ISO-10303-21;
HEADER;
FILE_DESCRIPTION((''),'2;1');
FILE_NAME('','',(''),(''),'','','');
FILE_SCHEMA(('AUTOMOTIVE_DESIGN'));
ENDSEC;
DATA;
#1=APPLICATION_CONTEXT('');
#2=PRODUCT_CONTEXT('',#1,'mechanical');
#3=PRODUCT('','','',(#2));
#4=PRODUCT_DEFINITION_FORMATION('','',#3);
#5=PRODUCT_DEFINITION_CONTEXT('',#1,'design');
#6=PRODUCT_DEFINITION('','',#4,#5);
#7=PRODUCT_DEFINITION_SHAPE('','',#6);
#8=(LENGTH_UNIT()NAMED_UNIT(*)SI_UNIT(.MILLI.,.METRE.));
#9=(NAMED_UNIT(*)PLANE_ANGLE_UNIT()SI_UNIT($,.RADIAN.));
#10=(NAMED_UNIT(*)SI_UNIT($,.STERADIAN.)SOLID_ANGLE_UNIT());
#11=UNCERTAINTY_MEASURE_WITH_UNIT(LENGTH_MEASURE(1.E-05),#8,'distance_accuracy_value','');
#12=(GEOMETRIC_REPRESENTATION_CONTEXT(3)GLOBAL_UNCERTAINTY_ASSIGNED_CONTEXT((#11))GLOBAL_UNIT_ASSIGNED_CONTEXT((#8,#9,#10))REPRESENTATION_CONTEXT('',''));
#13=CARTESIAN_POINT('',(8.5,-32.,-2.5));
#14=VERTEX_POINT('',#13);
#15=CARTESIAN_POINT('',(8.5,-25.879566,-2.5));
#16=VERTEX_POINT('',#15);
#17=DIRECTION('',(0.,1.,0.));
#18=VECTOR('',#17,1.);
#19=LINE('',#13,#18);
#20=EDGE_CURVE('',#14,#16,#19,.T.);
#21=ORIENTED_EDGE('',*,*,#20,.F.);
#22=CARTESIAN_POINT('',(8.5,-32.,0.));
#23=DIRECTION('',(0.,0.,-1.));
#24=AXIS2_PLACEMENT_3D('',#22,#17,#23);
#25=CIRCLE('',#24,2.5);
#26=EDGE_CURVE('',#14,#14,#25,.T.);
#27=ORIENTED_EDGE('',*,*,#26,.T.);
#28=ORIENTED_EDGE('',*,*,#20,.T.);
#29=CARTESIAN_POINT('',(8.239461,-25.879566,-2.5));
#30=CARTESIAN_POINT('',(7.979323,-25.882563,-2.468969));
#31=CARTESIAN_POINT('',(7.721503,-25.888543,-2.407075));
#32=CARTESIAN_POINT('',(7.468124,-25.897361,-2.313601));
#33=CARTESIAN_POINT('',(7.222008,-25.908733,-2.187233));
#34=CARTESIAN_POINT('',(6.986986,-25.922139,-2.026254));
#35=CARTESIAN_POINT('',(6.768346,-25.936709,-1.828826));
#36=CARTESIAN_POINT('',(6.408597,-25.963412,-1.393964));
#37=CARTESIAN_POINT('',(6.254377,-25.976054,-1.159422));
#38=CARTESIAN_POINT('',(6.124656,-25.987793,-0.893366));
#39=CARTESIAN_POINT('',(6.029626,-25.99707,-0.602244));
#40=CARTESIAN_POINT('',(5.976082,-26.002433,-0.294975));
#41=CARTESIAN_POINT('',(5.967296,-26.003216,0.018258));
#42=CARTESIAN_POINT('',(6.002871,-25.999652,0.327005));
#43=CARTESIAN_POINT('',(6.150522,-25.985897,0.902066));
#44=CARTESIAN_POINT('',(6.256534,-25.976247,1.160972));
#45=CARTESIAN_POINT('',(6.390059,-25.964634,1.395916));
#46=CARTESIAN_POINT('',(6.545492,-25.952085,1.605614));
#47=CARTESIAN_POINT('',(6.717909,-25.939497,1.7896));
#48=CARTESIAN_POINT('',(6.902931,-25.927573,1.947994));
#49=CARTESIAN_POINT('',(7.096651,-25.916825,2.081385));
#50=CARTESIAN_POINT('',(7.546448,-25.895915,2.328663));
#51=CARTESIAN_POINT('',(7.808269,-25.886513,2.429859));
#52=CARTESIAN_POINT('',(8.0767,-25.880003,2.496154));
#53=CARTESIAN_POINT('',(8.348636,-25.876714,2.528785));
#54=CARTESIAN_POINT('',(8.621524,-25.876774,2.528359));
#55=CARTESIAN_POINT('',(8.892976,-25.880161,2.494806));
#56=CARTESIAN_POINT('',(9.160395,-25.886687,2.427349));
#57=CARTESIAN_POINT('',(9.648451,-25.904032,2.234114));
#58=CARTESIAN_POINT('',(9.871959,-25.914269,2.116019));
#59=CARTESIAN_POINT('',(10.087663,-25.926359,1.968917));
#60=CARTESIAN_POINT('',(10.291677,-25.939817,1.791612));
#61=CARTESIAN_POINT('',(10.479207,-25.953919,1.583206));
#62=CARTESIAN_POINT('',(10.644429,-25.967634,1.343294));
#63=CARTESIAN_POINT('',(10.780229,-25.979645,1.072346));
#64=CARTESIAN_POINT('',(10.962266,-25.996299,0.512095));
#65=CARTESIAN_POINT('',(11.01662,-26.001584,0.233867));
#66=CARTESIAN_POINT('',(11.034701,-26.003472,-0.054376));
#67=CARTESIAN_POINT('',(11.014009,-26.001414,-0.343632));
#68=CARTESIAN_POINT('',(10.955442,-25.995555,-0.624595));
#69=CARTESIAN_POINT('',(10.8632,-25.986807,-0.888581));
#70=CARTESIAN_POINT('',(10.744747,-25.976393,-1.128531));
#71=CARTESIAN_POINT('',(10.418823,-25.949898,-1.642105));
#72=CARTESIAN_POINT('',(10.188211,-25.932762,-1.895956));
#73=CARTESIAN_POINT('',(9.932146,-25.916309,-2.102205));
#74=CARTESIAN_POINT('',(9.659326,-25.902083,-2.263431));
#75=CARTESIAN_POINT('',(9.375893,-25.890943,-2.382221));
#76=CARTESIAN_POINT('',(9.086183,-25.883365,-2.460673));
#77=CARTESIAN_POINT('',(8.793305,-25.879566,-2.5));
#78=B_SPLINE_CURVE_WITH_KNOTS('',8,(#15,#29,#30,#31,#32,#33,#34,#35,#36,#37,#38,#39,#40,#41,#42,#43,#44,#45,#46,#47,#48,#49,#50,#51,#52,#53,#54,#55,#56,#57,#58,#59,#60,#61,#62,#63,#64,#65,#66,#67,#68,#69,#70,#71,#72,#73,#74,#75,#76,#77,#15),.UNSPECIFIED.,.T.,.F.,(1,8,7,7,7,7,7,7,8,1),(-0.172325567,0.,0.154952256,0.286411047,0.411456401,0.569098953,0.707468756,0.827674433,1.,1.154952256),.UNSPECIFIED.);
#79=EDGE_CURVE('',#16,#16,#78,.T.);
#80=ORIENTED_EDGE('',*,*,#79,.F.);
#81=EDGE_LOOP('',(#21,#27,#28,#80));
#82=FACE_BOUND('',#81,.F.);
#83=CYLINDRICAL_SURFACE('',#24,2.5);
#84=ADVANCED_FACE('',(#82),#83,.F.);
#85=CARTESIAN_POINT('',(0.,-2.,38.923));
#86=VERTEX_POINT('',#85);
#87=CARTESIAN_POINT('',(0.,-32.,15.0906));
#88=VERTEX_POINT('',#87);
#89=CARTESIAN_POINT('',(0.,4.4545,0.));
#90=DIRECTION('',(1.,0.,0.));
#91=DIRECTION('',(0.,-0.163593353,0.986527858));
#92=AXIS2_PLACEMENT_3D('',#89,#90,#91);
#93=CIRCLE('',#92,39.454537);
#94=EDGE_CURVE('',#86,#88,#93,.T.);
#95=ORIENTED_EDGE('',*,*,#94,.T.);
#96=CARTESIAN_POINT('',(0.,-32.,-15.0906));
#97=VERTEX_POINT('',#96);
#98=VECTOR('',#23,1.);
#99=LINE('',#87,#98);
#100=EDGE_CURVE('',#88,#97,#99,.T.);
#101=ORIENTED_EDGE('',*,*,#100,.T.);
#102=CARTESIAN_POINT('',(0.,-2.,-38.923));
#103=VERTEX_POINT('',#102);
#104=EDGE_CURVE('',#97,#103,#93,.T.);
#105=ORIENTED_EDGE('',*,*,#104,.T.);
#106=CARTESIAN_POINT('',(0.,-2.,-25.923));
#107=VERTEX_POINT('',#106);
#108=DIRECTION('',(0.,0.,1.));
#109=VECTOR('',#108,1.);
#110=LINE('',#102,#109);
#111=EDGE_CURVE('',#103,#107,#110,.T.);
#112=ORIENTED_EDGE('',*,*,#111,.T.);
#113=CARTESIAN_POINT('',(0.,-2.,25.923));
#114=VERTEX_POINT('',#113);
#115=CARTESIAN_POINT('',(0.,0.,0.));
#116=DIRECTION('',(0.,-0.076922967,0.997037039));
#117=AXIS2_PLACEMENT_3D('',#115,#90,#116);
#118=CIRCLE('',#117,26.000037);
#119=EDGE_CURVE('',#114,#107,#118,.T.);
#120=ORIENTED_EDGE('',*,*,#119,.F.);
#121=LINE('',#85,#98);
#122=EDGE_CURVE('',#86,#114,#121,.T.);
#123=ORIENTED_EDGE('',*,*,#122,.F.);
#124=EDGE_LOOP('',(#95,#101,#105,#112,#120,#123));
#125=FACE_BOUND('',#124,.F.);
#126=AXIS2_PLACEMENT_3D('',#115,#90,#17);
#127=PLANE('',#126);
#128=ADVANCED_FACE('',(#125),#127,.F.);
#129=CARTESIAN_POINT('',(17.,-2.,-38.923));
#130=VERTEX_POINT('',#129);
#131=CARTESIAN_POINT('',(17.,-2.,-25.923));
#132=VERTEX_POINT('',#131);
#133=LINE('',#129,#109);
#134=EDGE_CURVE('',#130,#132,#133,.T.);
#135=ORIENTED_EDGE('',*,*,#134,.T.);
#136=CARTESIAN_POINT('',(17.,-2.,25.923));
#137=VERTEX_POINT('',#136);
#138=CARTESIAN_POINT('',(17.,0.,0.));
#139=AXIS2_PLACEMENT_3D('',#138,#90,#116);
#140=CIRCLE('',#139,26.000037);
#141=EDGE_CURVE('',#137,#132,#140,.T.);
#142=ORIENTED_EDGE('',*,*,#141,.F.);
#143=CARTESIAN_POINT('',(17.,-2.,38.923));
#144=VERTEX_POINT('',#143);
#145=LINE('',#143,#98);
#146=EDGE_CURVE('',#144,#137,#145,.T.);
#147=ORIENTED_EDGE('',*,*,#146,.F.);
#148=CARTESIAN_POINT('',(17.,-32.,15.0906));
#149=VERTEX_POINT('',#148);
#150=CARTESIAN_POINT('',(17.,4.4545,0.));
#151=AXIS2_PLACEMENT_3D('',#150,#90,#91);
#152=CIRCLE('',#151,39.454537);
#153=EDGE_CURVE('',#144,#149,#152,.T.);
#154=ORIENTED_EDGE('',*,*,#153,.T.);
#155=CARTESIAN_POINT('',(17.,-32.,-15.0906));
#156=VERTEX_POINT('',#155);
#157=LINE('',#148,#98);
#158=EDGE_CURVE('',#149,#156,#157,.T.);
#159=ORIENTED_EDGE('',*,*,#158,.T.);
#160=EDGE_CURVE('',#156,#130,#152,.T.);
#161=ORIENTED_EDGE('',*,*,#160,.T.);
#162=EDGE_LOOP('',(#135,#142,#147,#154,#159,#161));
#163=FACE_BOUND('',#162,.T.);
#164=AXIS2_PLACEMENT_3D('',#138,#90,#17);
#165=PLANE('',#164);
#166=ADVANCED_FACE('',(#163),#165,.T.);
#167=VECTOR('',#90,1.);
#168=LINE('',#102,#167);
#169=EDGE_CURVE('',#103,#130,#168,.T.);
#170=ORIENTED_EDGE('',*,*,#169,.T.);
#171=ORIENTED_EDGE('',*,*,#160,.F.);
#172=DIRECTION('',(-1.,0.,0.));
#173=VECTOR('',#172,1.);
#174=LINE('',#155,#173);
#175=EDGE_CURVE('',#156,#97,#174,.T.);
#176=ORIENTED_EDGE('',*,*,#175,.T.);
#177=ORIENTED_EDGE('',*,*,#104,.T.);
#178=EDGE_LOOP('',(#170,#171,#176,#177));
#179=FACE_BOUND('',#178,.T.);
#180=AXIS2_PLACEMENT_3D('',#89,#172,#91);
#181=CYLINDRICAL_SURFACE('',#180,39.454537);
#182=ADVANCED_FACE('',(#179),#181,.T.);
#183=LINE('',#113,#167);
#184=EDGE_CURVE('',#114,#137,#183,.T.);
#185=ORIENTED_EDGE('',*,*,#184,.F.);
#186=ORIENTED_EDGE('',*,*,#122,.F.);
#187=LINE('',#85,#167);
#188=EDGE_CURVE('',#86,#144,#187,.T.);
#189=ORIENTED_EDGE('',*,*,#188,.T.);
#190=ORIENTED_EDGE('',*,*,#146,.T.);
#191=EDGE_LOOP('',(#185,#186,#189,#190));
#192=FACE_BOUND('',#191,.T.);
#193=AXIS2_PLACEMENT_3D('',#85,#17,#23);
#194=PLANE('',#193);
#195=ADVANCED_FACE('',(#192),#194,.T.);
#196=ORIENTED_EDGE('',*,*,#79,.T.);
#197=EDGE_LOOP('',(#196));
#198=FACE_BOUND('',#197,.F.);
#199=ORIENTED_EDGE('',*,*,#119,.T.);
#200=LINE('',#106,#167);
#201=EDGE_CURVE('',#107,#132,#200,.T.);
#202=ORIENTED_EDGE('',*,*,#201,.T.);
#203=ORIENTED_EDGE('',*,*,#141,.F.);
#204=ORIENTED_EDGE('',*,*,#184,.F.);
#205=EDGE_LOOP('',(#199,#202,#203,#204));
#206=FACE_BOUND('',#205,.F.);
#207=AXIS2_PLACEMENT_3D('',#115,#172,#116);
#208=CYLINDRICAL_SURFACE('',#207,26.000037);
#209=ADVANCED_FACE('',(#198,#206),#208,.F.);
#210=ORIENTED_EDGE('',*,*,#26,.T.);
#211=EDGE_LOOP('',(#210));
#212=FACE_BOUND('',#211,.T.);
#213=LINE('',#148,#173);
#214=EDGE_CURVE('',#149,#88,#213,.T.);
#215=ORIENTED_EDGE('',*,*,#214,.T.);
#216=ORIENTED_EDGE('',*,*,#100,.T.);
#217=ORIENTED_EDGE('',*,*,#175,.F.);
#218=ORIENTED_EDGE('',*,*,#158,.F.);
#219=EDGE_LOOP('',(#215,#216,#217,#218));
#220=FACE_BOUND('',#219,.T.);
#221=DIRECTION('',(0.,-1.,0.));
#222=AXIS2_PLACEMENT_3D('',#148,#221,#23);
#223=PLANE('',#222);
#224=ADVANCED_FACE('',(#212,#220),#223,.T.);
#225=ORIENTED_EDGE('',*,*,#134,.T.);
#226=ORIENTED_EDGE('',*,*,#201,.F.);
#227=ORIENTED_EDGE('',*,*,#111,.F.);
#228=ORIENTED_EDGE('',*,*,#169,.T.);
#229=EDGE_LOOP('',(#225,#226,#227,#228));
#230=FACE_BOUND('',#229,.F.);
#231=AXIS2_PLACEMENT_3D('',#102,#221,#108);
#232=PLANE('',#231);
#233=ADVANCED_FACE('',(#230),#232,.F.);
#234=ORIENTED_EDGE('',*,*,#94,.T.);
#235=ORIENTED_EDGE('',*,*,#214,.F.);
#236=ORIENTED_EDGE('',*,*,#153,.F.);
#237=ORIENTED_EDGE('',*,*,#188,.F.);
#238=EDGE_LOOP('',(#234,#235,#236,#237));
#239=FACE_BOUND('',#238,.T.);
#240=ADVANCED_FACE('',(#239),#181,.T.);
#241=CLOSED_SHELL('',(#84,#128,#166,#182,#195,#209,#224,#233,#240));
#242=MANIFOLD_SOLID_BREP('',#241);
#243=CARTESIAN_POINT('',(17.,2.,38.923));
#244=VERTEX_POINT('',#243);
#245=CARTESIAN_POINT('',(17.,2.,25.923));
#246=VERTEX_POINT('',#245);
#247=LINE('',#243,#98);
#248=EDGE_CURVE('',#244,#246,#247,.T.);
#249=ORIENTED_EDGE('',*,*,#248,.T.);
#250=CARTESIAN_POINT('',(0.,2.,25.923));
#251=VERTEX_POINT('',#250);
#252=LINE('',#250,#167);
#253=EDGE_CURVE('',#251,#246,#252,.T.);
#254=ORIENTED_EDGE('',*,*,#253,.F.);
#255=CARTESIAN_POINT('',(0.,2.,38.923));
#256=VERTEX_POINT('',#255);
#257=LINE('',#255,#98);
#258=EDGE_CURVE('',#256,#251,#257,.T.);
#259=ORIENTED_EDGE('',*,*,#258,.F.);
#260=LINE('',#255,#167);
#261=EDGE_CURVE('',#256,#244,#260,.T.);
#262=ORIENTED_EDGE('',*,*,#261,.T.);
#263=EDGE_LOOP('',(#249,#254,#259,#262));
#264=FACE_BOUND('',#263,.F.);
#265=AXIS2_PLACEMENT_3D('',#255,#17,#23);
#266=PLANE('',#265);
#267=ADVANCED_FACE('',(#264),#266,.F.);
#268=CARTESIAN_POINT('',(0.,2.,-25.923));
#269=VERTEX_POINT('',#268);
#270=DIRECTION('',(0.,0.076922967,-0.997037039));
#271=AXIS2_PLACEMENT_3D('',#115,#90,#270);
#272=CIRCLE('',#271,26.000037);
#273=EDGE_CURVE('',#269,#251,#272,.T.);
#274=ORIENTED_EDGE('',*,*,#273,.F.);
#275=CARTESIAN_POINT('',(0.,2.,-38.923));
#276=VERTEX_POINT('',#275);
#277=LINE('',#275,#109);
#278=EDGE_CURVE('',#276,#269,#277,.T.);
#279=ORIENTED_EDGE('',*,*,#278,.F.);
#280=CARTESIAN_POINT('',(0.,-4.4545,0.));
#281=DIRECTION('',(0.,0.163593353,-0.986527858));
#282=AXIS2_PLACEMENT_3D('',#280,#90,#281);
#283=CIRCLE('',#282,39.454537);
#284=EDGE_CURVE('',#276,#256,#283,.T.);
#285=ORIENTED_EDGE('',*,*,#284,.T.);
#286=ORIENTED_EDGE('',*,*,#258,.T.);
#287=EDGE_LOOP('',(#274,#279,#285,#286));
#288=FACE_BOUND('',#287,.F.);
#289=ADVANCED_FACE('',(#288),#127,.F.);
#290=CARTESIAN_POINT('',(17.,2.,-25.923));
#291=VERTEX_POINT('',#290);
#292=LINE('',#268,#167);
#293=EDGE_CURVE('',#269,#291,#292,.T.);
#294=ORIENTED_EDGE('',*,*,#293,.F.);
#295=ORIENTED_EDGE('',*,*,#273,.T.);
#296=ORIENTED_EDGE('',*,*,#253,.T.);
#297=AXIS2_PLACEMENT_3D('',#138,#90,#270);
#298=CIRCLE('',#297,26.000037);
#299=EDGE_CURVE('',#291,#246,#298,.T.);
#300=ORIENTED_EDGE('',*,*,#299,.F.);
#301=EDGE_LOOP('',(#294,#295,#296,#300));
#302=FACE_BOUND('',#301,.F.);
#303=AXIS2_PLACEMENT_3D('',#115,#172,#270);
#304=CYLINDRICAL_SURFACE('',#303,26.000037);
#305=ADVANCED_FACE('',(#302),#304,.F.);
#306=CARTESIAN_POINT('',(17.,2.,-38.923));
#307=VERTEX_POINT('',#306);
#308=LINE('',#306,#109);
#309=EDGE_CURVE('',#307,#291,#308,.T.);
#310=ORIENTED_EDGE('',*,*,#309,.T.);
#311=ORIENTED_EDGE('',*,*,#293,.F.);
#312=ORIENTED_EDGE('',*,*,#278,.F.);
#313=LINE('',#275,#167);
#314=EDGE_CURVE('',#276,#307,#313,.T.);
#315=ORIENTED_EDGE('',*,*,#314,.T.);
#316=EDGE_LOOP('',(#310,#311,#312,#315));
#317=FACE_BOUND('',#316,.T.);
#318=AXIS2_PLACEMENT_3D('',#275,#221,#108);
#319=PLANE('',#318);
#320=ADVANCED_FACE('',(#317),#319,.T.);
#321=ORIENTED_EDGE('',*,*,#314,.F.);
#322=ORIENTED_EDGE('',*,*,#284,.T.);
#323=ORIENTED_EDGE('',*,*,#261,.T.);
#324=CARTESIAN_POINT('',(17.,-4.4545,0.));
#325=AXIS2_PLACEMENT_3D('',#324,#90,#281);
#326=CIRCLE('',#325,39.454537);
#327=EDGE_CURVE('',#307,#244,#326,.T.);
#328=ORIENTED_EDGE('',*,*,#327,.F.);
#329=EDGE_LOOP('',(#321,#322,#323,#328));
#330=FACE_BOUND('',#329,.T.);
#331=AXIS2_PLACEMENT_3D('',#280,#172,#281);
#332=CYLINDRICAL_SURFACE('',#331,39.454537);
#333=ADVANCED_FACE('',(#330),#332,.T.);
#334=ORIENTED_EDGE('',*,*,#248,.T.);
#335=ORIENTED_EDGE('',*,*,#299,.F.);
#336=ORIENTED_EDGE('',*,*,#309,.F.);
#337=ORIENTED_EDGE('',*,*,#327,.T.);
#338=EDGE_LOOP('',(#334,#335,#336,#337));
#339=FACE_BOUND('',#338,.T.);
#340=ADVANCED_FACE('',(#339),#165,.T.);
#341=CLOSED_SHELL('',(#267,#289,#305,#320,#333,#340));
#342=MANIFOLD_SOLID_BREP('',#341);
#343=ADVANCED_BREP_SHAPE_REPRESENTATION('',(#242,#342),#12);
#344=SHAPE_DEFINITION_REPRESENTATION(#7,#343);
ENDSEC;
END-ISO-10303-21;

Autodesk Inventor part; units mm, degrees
ref_plane "YZ Plane" through (0, 0, 0) normal (1, 0, 0) x (0, 1, 0)
ref_plane "XZ Plane" through (0, 0, 0) normal (0, 1, 0) x (-1, 0, 0)
ref_plane "XY Plane" through (0, 0, 0) normal (0, 0, 1) x (1, 0, 0)
sketch "Sketch1" plane through (0, 0, 0) normal (1, 0, 0) x (0, 1, 0)
  arc A0 (2, -38.923) -> (2, 38.923) centre (-4.4545, 0) ccw
  line L0 (0, -54.4921) -> (0, 54.4921) construction
  line L1 (2, 38.923) -> (2, 25.923)
  line L2 (2, -38.923) -> (2, -25.923)
  line L3 (-49, 0) -> (49, 0) construction
  arc A1 (2, -25.923) -> (2, 25.923) centre (0, 0) ccw
  arc A2 (-2, 38.923) -> (-2, -38.923) centre (4.4545, 0) ccw
  line L4 (-2, 38.923) -> (-2, 25.923)
  line L5 (-2, -38.923) -> (-2, -25.923)
  arc A3 (-2, 25.923) -> (-2, -25.923) centre (0, 0) ccw
  point P0 (0, 0)
  point P1 (12.8231, 0)
  point P2 (35, 0)
  point P3 (12.8231, 0)
  point P4 (26, 0)
  point P5 (-12.8231, 0)
  point P6 (-35, 0)
  point P7 (-12.8231, 0)
  point P8 (-26, 0)
  dimension "d2" = 13
  dimension "d6" = 26
  dimension "d7" = 9
  dimension "d9" = 33
extrude "Extrusion1" add sketch "Sketch1" along normal blind 17
sketch "Sketch5" plane through (17, 0, 0) normal (1, 0, 0) x (0, 0, -1)
  line L0 (38.923, -2) -> (25.923, -2) construction
  arc A0 (-25.923, -2) -> (25.923, -2) centre (0, 0) ccw construction
  line L1 (-25.923, -2) -> (-38.923, -2) construction
  arc A1 (-38.923, -2) -> (38.923, -2) centre (0, 4.4545) ccw construction
  line L2 (0, -49) -> (0, 49) construction
  arc A2 (-25.923, -2) -> (25.923, -2) centre (0, 0) ccw construction
  line L3 (15.0906, -35) -> (-15.0906, -35)
  line L4 (-15.0906, -35) -> (-15.0906, -32)
  line L5 (-15.0906, -32) -> (15.0906, -32)
  line L6 (15.0906, -32) -> (15.0906, -35)
  arc A3 (-38.923, -2) -> (38.923, -2) centre (0, 4.4545) ccw projected
  point P0 (0, 0)
  point P1 (0, -26)
  dimension "d13" = 6
extrude "Extrusion2" cut sketch "Sketch5" against normal blind 17
sketch "Sketch6" plane through (17, -32, -15.0906) normal (0, -1, 0) x (1, 0, 0)
  line L0 (0, 30.1813) -> (0, 0) construction
  line L1 (-17, 30.1813) -> (0, 30.1813) construction
  line L2 (-17, 0) -> (-17, 30.1813) construction
  line L3 (0, 0) -> (-17, 0) construction
  line L4 (-17, 15.0906) -> (0, 15.0906) construction
  line L5 (0, 41.0136) -> (0, -10.8323) construction
  line L6 (-17, 30.1813) -> (0, 30.1813) construction
  line L7 (-8.5, 30.1813) -> (-8.5, 0) construction
  point P0 (-8.5, 15.0906)
hole "Hole1" at (8.5, -32, 0) direction (0, 1, 0) diameter 5 depth 8 tip angle 118
properties part number "turny_bit"
